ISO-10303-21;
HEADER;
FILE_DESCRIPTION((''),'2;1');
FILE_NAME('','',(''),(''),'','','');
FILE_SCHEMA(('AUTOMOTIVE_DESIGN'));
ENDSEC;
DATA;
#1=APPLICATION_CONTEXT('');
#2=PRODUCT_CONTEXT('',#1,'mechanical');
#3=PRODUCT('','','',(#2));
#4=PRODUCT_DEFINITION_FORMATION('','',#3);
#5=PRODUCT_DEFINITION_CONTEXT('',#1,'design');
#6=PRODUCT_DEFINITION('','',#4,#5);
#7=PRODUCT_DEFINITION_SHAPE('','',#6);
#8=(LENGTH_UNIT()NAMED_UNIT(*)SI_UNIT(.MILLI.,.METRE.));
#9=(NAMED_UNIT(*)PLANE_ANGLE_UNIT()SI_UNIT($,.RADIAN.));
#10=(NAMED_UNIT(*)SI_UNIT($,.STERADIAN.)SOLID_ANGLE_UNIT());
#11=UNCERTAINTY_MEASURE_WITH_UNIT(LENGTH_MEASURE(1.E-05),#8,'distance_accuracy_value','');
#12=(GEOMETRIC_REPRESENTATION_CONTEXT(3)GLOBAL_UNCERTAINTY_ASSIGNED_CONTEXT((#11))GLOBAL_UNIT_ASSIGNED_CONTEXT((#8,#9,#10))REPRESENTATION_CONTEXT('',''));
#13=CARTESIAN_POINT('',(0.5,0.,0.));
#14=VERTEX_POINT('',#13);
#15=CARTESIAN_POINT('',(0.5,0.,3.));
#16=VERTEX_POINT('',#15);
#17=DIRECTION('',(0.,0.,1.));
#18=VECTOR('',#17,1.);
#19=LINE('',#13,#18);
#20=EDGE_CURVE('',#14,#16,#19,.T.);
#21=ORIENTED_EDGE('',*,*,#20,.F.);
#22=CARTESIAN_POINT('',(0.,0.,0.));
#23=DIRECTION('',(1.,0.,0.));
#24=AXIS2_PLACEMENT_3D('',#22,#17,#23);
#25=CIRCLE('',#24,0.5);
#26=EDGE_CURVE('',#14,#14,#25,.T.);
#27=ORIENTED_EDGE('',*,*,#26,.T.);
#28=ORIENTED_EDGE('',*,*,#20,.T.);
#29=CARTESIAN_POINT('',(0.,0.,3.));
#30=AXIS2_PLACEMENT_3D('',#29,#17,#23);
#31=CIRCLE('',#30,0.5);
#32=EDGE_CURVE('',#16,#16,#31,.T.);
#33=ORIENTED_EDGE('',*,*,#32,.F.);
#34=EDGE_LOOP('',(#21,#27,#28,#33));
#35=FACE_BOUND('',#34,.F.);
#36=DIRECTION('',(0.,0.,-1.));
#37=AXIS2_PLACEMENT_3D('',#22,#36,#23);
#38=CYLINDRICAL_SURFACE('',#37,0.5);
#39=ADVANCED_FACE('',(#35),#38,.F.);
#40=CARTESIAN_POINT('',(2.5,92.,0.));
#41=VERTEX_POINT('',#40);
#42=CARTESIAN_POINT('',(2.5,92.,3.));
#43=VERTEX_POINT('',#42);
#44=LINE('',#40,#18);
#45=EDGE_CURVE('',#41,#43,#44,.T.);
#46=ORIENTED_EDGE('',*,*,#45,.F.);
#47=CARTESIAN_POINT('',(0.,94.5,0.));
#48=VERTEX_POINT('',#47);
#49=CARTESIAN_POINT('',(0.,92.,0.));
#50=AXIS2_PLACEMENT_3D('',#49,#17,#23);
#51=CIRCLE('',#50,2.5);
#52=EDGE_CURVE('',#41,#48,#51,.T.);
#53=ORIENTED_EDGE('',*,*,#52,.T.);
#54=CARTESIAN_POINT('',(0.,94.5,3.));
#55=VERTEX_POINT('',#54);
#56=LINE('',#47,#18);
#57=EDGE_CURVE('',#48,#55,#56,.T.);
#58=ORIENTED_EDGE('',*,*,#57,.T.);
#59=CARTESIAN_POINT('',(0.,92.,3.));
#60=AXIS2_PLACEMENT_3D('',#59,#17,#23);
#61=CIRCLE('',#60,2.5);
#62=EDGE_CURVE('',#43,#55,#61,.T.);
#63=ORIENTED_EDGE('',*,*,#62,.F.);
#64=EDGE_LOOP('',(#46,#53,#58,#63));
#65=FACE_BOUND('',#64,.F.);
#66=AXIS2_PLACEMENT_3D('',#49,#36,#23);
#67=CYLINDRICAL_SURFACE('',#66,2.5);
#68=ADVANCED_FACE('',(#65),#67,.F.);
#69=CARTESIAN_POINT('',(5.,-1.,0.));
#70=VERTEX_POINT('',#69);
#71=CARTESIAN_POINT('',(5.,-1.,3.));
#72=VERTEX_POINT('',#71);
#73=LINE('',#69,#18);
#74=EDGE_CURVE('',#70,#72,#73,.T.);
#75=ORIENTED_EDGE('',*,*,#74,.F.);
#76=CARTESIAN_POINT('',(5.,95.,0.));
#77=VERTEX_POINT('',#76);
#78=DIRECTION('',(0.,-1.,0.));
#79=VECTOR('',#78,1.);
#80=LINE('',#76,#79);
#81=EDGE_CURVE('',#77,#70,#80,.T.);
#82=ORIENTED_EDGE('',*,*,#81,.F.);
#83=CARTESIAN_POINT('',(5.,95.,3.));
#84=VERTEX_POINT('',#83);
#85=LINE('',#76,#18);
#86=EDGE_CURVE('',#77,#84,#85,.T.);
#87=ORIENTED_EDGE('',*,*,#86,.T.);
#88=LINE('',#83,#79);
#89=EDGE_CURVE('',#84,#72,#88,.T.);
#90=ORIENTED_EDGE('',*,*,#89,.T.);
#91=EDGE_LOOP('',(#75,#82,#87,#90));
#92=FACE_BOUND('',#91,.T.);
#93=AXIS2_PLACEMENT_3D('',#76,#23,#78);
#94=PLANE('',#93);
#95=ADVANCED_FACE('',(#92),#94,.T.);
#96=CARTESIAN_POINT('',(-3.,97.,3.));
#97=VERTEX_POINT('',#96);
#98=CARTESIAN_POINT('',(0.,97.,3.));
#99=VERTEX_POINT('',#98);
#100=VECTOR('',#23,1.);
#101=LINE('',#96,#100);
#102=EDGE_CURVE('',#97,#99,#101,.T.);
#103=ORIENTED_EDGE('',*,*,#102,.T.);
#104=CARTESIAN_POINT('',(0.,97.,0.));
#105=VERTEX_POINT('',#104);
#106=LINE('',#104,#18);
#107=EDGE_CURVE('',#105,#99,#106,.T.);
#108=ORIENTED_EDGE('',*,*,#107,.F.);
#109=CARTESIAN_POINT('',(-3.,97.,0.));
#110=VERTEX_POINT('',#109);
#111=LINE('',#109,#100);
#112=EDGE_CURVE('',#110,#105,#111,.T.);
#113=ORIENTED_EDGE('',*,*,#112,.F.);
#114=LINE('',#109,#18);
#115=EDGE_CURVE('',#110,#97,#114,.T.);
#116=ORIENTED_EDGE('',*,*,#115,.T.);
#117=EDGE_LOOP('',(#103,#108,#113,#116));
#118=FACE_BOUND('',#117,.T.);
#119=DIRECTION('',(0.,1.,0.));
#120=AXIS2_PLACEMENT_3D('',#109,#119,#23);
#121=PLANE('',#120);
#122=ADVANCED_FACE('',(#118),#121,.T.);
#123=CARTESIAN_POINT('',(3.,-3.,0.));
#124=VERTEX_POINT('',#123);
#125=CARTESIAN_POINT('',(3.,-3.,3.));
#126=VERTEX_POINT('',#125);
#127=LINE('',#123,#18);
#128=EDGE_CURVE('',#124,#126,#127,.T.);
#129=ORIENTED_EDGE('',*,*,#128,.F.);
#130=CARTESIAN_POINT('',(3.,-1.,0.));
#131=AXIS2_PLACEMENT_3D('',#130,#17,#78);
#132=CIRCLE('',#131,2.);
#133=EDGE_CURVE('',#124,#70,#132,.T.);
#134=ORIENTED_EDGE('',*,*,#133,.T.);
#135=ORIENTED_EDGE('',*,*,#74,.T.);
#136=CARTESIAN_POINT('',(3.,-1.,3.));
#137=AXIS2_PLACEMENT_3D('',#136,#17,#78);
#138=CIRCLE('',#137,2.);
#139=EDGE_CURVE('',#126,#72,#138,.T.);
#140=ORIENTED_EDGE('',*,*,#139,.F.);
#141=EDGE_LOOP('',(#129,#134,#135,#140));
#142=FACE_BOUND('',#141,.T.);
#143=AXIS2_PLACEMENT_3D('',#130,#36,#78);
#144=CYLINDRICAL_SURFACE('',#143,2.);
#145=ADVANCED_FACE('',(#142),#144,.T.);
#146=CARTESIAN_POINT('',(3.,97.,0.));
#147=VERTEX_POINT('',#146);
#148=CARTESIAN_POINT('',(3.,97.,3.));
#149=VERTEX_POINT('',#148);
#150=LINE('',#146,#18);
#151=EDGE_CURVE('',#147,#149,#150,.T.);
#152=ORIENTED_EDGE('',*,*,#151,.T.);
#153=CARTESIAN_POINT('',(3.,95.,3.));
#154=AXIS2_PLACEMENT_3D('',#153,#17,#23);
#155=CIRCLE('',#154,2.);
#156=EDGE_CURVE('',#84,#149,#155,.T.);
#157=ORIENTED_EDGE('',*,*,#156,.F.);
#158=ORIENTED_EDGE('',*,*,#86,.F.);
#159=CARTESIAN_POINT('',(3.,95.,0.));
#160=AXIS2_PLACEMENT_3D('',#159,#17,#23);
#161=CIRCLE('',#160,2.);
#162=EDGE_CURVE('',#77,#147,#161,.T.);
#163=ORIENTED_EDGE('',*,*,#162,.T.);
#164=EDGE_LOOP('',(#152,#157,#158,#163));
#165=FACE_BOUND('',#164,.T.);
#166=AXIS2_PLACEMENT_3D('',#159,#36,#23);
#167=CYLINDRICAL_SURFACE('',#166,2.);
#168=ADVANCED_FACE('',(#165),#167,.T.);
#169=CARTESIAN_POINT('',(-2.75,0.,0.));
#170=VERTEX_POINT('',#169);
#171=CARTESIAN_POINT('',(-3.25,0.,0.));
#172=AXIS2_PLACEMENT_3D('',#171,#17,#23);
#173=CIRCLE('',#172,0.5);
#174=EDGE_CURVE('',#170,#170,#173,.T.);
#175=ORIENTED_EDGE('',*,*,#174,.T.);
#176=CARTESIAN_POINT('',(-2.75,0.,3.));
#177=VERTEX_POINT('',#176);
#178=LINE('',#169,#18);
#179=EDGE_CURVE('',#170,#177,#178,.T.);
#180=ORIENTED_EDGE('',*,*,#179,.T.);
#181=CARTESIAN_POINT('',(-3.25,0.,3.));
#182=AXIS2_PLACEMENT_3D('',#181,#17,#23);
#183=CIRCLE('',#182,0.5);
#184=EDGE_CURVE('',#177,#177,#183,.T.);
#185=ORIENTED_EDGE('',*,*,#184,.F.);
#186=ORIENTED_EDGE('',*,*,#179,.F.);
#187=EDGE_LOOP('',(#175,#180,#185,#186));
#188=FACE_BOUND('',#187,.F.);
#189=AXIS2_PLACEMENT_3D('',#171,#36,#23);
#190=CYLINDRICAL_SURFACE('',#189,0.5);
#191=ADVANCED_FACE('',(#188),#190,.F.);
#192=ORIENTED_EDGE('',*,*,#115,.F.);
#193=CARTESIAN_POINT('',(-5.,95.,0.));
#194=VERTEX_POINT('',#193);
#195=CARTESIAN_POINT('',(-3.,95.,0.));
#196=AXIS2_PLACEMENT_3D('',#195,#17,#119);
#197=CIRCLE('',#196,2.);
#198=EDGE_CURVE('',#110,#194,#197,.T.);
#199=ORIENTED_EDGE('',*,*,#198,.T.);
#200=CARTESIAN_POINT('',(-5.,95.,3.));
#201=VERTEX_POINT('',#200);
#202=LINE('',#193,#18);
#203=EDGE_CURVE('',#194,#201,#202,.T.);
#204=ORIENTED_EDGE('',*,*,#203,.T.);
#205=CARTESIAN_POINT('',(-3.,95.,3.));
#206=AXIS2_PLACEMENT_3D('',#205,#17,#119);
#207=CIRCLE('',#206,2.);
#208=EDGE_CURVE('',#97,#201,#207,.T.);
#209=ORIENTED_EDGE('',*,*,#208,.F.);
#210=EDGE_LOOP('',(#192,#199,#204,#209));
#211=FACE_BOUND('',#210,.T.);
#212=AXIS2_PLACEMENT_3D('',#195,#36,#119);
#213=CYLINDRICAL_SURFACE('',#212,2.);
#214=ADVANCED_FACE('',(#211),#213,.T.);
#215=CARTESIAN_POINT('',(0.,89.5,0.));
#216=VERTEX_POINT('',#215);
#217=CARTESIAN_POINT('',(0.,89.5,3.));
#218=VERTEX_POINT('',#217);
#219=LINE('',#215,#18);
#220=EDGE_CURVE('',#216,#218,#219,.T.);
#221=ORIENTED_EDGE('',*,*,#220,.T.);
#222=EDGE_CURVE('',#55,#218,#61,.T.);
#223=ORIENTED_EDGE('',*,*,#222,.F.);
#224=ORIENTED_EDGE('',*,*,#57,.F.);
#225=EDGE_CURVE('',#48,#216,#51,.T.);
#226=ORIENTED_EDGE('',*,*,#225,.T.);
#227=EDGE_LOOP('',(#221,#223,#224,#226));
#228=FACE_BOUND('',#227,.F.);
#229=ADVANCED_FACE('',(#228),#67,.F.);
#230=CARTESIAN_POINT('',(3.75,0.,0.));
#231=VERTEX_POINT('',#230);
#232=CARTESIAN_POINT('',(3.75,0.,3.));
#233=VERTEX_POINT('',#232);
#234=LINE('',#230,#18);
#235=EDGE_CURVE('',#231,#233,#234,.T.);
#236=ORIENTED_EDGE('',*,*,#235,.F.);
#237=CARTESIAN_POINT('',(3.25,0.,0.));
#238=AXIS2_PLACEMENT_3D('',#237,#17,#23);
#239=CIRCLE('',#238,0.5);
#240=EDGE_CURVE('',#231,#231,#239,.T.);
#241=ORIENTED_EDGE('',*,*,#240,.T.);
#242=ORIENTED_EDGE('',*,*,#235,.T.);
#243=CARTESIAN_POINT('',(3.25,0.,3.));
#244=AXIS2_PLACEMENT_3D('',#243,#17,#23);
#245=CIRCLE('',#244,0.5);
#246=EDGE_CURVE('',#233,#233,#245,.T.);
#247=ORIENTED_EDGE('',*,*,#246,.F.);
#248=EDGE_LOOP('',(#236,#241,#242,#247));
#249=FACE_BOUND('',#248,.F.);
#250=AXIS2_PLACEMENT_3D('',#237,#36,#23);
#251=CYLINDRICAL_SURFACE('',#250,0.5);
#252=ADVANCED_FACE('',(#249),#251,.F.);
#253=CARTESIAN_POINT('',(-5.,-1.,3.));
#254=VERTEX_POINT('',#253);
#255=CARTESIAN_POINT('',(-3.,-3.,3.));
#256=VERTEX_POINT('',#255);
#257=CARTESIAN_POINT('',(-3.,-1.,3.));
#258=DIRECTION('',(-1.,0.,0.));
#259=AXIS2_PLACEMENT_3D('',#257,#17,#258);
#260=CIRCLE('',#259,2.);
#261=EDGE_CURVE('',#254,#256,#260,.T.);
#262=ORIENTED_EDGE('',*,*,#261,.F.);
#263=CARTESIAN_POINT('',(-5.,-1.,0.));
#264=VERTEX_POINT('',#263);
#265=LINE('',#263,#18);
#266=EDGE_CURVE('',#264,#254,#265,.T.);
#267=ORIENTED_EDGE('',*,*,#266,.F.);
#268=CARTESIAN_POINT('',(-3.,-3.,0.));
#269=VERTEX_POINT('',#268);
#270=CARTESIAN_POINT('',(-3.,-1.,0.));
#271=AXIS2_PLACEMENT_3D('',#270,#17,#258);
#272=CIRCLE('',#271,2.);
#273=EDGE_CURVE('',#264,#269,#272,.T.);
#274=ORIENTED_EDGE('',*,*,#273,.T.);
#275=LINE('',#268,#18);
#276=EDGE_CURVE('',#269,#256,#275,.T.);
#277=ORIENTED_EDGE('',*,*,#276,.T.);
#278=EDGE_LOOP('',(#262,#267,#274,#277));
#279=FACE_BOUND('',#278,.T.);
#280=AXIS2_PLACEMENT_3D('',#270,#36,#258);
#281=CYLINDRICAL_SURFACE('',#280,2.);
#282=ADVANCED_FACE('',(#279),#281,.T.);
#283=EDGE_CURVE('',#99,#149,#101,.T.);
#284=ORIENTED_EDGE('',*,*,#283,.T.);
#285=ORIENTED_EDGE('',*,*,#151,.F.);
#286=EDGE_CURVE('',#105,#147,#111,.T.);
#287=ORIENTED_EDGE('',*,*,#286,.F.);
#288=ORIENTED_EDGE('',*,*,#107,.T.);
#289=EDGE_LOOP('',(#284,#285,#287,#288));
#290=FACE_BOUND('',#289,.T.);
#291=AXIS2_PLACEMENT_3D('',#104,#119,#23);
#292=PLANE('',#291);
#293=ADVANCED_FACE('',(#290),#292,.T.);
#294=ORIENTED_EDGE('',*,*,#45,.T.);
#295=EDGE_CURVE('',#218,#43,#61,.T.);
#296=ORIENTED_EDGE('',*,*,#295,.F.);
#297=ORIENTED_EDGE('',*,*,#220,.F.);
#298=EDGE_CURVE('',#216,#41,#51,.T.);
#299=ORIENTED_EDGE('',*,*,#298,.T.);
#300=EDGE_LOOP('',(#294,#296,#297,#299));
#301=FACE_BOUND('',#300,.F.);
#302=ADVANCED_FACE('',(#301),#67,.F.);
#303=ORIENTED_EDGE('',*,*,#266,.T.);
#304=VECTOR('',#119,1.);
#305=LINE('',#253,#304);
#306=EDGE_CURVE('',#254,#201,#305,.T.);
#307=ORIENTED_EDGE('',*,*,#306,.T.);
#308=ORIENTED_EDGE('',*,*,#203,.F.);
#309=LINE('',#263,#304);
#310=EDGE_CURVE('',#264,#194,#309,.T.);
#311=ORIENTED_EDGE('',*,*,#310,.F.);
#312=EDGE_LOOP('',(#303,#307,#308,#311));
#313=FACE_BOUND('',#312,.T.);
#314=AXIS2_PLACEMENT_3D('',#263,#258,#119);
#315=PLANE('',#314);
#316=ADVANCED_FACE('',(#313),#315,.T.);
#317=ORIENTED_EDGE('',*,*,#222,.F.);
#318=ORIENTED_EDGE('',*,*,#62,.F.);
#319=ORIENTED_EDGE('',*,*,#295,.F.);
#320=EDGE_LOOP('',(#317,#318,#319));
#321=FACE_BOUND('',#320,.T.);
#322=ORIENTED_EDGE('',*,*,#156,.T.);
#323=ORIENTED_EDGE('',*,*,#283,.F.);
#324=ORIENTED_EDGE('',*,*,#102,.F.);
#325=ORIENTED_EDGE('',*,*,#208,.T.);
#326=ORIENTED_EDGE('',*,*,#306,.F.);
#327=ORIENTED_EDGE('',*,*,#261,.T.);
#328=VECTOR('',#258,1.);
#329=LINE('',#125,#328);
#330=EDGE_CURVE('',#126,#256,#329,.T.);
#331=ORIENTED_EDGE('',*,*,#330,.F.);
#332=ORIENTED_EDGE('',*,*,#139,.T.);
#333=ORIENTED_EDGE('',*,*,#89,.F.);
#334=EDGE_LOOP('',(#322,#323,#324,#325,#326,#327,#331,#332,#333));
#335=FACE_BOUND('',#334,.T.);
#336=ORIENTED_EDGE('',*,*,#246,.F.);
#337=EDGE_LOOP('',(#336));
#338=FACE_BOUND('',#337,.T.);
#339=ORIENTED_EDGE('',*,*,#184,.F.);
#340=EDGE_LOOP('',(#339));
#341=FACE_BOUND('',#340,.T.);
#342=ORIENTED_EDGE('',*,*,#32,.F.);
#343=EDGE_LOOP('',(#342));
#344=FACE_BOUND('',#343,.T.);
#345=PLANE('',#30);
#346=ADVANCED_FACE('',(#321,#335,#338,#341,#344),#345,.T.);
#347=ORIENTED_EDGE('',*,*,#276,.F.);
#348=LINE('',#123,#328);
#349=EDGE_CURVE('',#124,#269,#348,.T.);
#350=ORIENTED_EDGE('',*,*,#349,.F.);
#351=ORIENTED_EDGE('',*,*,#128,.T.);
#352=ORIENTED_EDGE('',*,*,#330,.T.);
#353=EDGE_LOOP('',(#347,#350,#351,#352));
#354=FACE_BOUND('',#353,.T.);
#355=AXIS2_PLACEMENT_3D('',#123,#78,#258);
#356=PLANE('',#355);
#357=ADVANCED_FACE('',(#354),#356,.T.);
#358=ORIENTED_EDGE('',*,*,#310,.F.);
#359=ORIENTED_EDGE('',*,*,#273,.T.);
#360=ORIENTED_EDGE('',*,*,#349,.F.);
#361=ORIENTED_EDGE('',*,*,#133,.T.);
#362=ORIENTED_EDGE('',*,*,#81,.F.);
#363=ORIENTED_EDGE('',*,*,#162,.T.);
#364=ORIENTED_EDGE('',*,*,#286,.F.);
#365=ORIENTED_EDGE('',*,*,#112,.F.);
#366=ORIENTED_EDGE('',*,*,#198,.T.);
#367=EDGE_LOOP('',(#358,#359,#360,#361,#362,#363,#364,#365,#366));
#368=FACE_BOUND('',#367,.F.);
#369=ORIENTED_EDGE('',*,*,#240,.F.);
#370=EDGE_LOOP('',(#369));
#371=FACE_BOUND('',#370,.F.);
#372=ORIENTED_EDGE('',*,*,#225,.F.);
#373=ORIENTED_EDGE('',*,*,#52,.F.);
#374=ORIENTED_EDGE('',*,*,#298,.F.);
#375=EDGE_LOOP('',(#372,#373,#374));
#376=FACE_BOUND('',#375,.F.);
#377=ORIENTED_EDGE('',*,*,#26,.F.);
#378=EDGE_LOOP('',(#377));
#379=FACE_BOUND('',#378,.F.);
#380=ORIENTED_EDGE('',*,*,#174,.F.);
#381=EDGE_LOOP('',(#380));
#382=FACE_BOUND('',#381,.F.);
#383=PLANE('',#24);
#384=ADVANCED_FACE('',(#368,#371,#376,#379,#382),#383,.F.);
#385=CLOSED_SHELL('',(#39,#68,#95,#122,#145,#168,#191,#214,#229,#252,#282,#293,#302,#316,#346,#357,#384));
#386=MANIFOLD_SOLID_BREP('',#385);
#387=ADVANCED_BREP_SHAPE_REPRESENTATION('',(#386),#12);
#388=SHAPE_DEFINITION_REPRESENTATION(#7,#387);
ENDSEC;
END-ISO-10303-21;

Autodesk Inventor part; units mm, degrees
ref_plane "YZ Plane" through (0, 0, 0) normal (1, 0, 0) x (0, 1, 0)
ref_plane "XZ Plane" through (0, 0, 0) normal (0, 1, 0) x (-1, 0, 0)
ref_plane "XY Plane" through (0, 0, 0) normal (0, 0, 1) x (1, 0, 0)
sketch "Sketch1" plane through (0, 0, 0) normal (0, 0, 1) x (1, 0, 0)
  circle A0 centre (0, 0) radius 0.5
  line L0 (-3, 97) -> (3, 97)
  line L1 (5, 95) -> (5, -1)
  line L2 (3, -3) -> (-3, -3)
  line L3 (-5, -1) -> (-5, 95)
  arc A1 (-3, 97) -> (-5, 95) centre (-3, 95) ccw
  arc A2 (5, 95) -> (3, 97) centre (3, 95) ccw
  arc A3 (-5, -1) -> (-3, -3) centre (-3, -1) ccw
  arc A4 (3, -3) -> (5, -1) centre (3, -1) ccw
  circle A5 centre (0, 92) radius 2.5
  line L4 (0, 97) -> (0, 86.8445)
  circle A6 centre (-3.25, 0) radius 0.5
  circle A7 centre (3.25, 0) radius 0.5
  point P0 (-5, 97)
  point P1 (-5, -3)
  point P2 (0, -3)
  dimension "d3" = 1
  dimension "d7" = 100
  dimension "d8" = 10
  dimension "d9" = 3
  dimension "d10" = 2
  dimension "d11" = 5
  dimension "d12" = 5
  dimension "d15" = 1
  dimension "d16" = 1
  dimension "d17" = 3.25
  dimension "d18" = 3.25
extrude "Extrusion1" add sketch "Sketch1" along normal blind 3
properties part number "FP V2 Servo Arm v2"
